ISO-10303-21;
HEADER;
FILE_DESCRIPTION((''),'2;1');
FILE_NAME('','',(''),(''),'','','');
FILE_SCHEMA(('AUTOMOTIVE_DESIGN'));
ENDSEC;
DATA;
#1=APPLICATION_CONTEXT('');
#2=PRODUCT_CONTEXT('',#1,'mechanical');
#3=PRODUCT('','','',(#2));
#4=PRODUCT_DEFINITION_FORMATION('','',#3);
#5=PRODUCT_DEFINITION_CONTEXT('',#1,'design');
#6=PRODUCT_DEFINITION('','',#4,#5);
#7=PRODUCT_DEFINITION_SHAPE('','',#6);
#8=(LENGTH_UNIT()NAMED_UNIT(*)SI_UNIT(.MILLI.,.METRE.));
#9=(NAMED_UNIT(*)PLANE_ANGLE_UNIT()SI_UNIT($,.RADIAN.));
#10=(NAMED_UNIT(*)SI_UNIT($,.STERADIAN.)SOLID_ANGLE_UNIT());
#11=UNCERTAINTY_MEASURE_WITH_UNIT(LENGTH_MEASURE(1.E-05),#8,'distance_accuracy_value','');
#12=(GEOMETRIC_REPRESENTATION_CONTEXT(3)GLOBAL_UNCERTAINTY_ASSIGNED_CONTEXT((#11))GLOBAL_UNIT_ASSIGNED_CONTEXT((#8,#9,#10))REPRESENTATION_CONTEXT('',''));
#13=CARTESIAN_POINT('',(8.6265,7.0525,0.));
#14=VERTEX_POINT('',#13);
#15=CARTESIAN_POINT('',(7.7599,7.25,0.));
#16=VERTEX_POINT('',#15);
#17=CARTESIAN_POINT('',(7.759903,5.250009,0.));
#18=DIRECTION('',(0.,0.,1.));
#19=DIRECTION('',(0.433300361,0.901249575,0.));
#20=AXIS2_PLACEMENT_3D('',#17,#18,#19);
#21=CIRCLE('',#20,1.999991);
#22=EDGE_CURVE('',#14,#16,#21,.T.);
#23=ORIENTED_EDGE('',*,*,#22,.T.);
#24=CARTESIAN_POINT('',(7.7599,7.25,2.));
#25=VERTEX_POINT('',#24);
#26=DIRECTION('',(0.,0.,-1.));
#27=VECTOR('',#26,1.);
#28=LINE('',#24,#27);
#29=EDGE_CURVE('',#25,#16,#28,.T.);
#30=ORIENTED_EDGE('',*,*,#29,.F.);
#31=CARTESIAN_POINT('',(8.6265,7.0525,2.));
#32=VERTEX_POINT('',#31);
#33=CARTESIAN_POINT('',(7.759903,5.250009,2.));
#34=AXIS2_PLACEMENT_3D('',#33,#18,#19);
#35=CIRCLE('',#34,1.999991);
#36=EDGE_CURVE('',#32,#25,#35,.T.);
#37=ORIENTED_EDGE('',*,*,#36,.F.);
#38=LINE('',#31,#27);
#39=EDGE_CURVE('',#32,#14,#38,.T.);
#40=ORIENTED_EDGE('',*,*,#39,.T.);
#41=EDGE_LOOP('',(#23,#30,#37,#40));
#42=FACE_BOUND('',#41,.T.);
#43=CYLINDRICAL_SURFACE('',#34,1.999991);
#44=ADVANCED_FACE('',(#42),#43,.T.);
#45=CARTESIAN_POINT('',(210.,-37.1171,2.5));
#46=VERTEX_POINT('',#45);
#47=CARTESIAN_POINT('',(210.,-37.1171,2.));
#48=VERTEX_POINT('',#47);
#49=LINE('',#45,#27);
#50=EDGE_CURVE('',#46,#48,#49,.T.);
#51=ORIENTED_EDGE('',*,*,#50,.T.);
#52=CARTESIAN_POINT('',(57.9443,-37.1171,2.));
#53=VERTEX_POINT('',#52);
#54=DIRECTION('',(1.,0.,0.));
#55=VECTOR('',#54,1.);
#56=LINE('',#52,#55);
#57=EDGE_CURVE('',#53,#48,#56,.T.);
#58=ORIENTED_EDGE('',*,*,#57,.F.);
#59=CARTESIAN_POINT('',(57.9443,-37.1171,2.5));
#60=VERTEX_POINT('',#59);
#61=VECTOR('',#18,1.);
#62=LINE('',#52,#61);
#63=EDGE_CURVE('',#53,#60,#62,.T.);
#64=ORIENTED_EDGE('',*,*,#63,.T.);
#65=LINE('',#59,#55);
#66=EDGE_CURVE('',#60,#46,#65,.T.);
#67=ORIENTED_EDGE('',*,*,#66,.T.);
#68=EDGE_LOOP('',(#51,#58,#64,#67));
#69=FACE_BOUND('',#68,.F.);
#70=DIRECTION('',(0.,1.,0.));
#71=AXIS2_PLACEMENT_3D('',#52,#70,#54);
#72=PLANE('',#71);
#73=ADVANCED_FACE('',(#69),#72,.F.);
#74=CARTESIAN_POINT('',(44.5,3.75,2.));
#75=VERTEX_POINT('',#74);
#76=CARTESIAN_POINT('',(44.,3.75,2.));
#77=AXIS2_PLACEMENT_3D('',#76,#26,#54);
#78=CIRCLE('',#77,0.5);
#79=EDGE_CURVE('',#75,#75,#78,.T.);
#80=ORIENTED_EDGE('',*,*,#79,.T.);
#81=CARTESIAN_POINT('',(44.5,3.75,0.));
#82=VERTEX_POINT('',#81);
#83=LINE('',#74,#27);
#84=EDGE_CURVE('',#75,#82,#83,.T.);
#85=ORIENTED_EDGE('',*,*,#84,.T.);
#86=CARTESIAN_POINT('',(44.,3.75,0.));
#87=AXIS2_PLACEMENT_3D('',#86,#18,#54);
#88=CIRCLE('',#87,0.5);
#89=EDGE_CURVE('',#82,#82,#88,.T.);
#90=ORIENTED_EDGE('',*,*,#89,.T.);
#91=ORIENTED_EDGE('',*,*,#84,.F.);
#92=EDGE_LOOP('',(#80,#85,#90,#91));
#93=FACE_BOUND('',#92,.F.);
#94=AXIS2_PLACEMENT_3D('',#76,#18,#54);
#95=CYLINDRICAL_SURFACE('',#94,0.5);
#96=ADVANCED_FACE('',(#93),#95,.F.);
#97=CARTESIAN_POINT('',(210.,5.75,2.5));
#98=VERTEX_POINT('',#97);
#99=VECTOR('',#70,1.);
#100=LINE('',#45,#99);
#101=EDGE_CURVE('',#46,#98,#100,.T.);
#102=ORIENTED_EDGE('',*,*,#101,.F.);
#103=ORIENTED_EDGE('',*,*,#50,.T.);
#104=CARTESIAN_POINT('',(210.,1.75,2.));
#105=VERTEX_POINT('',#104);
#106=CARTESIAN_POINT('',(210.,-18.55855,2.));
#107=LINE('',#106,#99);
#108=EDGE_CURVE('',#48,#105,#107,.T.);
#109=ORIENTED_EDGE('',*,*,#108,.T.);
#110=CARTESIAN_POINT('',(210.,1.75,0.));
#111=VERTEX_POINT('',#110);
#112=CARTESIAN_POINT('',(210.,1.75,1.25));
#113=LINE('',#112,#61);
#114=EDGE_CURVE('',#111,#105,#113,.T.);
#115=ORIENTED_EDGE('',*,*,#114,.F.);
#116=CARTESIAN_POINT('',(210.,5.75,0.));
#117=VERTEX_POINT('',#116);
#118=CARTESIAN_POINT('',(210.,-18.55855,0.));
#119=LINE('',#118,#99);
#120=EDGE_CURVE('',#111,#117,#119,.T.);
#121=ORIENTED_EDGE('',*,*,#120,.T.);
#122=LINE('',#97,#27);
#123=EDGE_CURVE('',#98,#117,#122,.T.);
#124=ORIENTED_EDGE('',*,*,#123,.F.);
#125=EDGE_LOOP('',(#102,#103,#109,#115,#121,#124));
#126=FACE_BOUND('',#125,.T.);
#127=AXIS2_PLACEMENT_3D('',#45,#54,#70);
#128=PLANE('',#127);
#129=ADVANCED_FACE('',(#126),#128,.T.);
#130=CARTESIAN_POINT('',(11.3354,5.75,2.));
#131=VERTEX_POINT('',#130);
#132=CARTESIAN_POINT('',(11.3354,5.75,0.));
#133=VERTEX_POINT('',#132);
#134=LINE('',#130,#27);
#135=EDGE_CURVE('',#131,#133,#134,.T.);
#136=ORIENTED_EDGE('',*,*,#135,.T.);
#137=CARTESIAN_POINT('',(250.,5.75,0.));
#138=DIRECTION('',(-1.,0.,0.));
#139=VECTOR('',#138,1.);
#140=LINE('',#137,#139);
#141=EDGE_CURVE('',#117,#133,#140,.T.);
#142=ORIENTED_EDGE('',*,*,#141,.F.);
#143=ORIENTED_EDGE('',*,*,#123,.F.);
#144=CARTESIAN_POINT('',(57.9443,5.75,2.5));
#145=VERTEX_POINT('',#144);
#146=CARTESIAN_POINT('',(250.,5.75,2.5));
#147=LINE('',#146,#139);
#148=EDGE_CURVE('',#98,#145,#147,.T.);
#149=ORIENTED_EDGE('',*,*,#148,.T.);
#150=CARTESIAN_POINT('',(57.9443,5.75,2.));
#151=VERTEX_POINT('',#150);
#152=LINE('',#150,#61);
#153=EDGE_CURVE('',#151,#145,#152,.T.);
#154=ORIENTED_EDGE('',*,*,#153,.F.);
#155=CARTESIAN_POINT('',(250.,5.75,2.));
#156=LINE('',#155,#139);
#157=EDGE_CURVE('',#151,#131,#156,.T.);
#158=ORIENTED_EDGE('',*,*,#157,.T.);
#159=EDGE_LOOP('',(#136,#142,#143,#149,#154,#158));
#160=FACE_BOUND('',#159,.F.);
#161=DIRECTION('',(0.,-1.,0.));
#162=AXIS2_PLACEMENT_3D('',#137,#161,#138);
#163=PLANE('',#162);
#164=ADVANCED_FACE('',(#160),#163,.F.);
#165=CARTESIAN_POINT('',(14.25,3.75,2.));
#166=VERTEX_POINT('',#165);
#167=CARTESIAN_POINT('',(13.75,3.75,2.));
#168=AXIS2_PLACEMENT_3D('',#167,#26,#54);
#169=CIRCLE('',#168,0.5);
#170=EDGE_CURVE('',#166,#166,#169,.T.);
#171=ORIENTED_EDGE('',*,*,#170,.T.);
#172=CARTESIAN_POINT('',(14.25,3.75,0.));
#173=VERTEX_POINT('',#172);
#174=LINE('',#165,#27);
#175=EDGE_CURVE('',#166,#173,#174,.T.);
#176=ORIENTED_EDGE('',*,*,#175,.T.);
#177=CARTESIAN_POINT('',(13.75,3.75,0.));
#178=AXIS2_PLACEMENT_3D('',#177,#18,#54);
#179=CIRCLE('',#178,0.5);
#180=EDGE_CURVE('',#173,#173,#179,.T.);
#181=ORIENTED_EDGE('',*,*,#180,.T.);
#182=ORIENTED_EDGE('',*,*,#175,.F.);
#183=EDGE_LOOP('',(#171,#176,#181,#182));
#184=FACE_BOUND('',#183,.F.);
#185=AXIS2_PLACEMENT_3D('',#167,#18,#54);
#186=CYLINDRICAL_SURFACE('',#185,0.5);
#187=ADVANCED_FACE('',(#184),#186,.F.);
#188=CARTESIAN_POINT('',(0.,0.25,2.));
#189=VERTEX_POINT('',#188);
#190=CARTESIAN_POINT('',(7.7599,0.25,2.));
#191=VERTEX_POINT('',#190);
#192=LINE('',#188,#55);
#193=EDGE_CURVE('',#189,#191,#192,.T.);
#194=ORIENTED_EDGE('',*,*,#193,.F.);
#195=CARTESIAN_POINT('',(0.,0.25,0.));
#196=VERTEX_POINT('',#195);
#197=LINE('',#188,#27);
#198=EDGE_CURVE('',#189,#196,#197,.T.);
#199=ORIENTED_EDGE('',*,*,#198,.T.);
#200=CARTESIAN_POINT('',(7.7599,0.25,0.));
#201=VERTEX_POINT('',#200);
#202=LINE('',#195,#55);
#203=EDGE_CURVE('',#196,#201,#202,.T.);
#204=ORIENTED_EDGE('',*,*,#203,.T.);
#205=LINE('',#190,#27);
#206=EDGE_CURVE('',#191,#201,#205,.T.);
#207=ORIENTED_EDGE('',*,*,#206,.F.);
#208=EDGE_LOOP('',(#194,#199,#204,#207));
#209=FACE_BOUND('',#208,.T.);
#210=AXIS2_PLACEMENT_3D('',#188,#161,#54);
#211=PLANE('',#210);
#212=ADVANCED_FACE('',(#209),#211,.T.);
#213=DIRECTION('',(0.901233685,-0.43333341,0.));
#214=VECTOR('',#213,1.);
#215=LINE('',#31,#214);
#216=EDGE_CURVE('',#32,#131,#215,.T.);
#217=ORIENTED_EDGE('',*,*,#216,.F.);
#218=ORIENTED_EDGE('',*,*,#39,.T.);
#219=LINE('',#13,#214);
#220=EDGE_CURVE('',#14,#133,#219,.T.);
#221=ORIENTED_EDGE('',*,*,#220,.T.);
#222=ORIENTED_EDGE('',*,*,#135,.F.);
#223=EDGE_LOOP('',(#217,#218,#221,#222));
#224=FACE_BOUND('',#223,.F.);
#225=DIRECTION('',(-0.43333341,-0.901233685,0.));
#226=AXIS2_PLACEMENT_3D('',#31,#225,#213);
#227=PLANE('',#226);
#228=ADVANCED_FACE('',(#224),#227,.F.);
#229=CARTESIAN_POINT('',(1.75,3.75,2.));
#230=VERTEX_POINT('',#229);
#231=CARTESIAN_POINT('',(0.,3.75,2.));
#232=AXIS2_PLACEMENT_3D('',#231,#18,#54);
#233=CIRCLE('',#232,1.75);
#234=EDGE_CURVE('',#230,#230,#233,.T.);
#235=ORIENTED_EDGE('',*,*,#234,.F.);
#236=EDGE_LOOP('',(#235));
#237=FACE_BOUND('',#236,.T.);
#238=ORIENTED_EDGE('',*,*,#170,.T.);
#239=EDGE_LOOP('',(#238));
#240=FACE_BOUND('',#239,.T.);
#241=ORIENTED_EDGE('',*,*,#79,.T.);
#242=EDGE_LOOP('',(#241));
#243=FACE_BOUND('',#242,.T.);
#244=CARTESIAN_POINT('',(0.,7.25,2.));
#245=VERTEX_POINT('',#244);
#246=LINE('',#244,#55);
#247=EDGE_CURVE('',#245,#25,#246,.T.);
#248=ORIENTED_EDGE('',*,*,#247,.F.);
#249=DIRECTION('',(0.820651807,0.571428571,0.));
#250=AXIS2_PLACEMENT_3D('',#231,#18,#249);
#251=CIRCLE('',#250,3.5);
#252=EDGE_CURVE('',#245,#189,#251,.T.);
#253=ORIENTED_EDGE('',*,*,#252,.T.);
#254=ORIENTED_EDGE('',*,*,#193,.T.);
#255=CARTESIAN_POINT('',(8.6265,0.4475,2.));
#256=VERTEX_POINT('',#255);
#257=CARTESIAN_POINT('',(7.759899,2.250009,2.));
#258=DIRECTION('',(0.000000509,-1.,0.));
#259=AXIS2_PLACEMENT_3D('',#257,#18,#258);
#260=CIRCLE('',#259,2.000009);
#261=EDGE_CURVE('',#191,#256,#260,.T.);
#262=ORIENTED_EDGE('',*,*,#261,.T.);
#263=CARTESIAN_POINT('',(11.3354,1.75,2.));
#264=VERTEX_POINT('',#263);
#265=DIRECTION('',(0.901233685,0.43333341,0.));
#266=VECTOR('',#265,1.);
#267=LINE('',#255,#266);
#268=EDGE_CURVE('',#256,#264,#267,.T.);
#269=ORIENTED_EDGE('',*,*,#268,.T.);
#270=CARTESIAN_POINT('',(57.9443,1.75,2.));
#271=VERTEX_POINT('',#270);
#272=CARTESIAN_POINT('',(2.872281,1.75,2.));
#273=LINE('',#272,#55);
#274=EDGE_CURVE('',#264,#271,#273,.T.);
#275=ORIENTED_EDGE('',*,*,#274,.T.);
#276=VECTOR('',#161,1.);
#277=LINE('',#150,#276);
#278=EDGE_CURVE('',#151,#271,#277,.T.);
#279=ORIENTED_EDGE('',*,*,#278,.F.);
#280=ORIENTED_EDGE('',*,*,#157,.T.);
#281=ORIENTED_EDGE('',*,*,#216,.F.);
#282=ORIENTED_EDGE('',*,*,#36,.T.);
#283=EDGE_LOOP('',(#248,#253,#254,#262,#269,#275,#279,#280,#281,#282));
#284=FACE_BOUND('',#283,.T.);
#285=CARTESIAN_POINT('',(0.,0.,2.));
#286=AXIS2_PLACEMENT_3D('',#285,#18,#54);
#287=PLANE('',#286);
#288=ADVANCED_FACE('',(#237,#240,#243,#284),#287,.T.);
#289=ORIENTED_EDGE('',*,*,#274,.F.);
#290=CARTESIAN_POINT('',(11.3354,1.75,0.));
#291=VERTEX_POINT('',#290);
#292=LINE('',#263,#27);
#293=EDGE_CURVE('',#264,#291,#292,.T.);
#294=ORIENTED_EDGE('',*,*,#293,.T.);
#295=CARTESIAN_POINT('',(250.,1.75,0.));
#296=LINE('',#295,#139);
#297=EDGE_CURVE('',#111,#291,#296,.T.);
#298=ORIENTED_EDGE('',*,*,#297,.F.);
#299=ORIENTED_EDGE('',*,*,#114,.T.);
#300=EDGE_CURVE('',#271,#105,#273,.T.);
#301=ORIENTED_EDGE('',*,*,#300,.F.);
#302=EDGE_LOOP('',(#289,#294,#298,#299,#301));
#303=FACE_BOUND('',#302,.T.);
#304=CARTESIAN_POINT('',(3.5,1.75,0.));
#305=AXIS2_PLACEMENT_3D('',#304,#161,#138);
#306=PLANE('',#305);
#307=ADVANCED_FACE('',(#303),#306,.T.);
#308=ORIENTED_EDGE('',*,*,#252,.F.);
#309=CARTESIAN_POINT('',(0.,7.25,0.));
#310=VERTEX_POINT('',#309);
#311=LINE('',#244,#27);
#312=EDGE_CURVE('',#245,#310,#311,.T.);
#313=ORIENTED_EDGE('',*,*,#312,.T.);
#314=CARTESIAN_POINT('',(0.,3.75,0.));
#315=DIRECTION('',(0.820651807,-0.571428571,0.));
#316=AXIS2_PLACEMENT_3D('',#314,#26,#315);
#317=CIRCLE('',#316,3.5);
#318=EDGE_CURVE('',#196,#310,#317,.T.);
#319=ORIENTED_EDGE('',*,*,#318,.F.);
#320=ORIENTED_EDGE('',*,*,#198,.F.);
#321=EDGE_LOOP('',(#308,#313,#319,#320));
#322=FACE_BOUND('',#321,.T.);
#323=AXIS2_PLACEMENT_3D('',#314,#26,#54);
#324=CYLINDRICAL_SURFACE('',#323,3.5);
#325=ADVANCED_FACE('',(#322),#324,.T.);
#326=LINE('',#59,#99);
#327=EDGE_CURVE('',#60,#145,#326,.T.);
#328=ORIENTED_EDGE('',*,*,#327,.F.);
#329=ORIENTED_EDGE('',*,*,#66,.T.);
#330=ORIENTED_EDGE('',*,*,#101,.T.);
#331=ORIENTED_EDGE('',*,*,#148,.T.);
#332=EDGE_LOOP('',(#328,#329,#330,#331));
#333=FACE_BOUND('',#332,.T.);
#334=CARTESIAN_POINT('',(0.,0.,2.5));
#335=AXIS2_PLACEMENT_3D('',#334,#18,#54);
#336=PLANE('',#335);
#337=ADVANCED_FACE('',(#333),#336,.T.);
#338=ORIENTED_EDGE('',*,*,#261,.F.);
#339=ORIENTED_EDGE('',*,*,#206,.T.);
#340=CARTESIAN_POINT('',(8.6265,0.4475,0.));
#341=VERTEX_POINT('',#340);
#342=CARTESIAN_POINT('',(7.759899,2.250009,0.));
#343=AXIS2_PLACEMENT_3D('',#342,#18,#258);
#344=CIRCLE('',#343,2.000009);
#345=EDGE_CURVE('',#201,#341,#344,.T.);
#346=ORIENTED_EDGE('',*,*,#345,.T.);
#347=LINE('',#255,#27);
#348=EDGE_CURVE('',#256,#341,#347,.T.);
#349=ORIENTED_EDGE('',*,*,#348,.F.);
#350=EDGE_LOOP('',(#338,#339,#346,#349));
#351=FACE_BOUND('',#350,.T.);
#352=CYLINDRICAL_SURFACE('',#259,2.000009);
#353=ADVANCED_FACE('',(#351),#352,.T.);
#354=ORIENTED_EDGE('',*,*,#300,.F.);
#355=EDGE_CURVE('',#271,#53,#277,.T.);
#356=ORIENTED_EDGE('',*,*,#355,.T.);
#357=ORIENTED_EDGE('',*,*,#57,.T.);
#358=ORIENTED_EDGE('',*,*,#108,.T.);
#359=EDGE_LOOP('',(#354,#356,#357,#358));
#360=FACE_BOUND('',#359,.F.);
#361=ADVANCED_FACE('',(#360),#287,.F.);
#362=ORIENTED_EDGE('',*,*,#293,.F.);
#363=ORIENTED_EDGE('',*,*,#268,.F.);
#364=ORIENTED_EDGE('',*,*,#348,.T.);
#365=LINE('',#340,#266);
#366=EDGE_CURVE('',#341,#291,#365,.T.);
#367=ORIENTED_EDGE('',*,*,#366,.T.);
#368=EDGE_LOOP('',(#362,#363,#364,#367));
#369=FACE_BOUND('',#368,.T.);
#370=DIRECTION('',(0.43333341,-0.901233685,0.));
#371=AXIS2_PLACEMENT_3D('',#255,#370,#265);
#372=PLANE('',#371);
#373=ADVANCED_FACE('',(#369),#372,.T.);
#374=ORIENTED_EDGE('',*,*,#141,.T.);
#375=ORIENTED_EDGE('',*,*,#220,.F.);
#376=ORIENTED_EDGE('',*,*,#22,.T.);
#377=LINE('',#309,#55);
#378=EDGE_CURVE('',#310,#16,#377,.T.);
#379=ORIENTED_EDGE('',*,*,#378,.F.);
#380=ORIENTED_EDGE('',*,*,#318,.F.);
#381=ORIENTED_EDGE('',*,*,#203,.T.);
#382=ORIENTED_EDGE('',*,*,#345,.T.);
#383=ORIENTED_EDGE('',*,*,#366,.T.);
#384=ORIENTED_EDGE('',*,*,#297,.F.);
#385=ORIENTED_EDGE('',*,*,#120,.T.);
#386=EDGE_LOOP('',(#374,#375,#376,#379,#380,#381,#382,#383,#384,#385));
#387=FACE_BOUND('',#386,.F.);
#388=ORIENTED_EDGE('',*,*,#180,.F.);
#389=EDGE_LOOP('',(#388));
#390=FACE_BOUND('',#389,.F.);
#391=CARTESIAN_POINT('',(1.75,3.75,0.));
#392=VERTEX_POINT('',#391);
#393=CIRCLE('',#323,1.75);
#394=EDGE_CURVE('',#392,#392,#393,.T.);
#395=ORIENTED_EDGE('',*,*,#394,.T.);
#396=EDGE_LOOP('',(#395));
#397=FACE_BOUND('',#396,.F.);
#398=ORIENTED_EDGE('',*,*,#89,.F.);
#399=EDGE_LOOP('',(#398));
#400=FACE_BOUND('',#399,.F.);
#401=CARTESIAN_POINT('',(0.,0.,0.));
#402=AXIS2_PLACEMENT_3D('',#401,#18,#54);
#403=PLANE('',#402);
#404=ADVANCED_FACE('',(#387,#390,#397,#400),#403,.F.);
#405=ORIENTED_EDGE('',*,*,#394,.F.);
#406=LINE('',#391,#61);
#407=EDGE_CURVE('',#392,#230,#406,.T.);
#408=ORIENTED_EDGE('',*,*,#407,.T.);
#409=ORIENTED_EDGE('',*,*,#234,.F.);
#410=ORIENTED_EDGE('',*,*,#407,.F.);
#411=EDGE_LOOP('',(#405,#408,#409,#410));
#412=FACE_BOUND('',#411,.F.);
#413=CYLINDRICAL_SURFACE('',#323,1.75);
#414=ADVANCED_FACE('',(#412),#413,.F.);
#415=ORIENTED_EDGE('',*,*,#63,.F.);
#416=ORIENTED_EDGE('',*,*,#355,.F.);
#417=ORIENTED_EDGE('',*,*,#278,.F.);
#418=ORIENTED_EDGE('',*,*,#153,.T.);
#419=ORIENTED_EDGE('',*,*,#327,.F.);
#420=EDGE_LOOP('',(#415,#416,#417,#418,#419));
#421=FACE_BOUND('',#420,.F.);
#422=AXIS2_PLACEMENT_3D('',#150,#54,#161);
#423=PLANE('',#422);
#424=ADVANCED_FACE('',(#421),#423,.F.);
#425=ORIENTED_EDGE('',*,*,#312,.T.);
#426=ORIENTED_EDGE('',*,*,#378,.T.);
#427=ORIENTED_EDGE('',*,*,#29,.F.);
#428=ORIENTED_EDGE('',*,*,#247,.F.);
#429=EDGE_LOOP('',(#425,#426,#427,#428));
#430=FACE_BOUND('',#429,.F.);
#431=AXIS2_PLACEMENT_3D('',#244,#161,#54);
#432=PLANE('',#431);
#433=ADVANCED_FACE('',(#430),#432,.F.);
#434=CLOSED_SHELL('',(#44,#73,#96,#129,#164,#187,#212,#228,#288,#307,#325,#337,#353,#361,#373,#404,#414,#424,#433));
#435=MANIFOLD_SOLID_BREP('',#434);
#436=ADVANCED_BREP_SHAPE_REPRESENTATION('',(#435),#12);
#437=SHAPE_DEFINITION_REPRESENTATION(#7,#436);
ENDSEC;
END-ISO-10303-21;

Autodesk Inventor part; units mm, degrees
ref_plane "YZ Plane" through (0, 0, 0) normal (1, 0, 0) x (0, 1, 0)
ref_plane "XZ Plane" through (0, 0, 0) normal (0, 1, 0) x (-1, 0, 0)
ref_plane "XY Plane" through (0, 0, 0) normal (0, 0, 1) x (1, 0, 0)
sketch "Sketch1" plane through (0, 0, 0) normal (0, 0, 1) x (1, 0, 0)
  circle A0 centre (0, 3.75) radius 1.75 projected
  line L0 (3.5, -3.25) -> (11.1738, -3.25) projected
  line L1 (11.1738, -3.25) -> (11.1738, -5.25) projected
  line L2 (11.1738, -5.25) -> (-11.1738, -5.25) projected
  line L3 (-11.1738, -5.25) -> (-11.1738, -3.25) projected
  line L4 (-11.1738, -3.25) -> (-3.5, -3.25) projected
  line L5 (-3.5, -3.25) -> (-3.5, 3.75) projected
  arc A1 (3.5, 3.75) -> (-3.5, 3.75) centre (0, 3.75) ccw projected
  line L6 (3.5, 3.75) -> (3.5, -3.25) projected
  line L7 (44, 1.75) -> (50, 1.75) projected
  circle A2 centre (0, 3.75) radius 3.5
  line L8 (0, 3.75) -> (250, 3.75)
  line L9 (50, 1.75) -> (0, 1.75)
  line L10 (0, 1.75) -> (0, 3.75)
  line L11 (0, 3.75) -> (50, 3.75)
  line L12 (50, 3.75) -> (50, 1.75)
  line L13 (50, 1.75) -> (250, 1.75)
  line L14 (250, 1.75) -> (250, 3.75)
  line L15 (250, 3.75) -> (50, 3.75)
  line L16 (50, 3.75) -> (50, 1.75)
  line L17 (0, 1.75) -> (250, 1.75)
  line L18 (250, 1.75) -> (250, 5.75)
  line L19 (250, 5.75) -> (0, 5.75)
  line L20 (0, 5.75) -> (0, 1.75)
  circle A3 centre (0, 3.75) radius 3.5
  point P0 (0, 0)
  point P1 (2.8723, 1.75)
  point P2 (2.8723, 5.75)
  dimension "d0" = 250
  dimension "d1" = 2
extrude "Extrusion1" add sketch "Sketch1" along normal blind 2 contours L8 A2 L9 L10 A0 | A0 L20 L19 A1 L8 | A0 L10 L9 A2 A1 L19 L20 | L8 L12 L7 L9 L6 | L6 L9 A2 | A1 L19 L18 L8 | L8 L14 L13 L12
sketch "Sketch2" plane through (0, 0, 2) normal (0, 0, 1) x (1, 0, 0)
  line L0 (13, -15.35) -> (13, -12.35) projected
  line L1 (13, -12.35) -> (14.6, -12.35) projected
  line L2 (14.6, -12.35) -> (14.6, -15.35) projected
  line L3 (14.6, -15.35) -> (13, -15.35) projected
  line L4 (15, -16.35) -> (12.5, -16.35) projected
  line L5 (15, -8.75) -> (15, -16.35) projected
  line L6 (15, -8.75) -> (15, -5.25) projected
  line L7 (12.5, -5.25) -> (15, -5.25) projected
  line L8 (12.5, -16.35) -> (12.5, -5.25) projected
  line L9 (44, -8.25) -> (41.5181, -8.25) projected
  line L10 (44, -9.25) -> (46.5, -9.25) projected
  line L11 (13.75, -5.25) -> (13.75, 7.3756)
  line L12 (44, -8.25) -> (44, 8.5683)
  line L13 (2.8723, 1.75) -> (250, 1.75) projected
  line L14 (250, 1.75) -> (250, 5.75) projected
  line L15 (250, 5.75) -> (2.8723, 5.75) projected
  arc A0 (2.8723, 5.75) -> (2.8723, 1.75) centre (0, 3.75) ccw projected
  circle A1 centre (0, 3.75) radius 1.75 projected
  line L16 (250, 5.75) -> (2.8723, 5.75) projected
  line L17 (13.75, 5.75) -> (13.75, 1.75)
  circle A2 centre (13.75, 3.75) radius 0.5
  line L18 (44, 5.75) -> (44, 1.75)
  line L19 (2.8723, 1.75) -> (250, 1.75) projected
  circle A3 centre (44, 3.75) radius 0.5
  point P0 (0, 0)
  dimension "d4" = 1
  dimension "d5" = 1
extrude "Extrusion2" cut sketch "Sketch2" against normal blind 2 contours A2 L11 | L11 A2 | A3 L12 | L12 A3
sketch "Sketch3" plane through (0, 0, 2) normal (0, 0, 1) x (1, 0, 0)
  line L0 (50, -24.1664) -> (50, 13.5237) projected
  circle A0 centre (44, 3.75) radius 0.5 projected
  circle A1 centre (13.75, 3.75) radius 0.5 projected
  line L1 (2.8723, 1.75) -> (250, 1.75) projected
  line L2 (250, 1.75) -> (250, 5.75) projected
  line L3 (250, 5.75) -> (2.8723, 5.75) projected
  arc A2 (2.8723, 5.75) -> (2.8723, 1.75) centre (0, 3.75) ccw projected
  circle A3 centre (0, 3.75) radius 1.75 projected
  line L4 (-50, -43.45) -> (50, -43.45) projected
  line L5 (250, 5.75) -> (57.9443, 5.75)
  line L6 (57.9443, 5.75) -> (57.9443, -37.1171)
  line L7 (57.9443, -37.1171) -> (250, -37.1171)
  line L8 (250, -37.1171) -> (250, 5.75)
  point P0 (0, 0)
  point P1 (57.9443, 5.75)
extrude "Extrusion3" add sketch "Sketch3" along normal blind 0.5 contours L6 L3 L2 L1 | L1 L8 L7 L6
sketch "Sketch4" plane through (0, 0, 2.5) normal (0, 0, 1) x (1, 0, 0)
  line L0 (250, -37.1171) -> (250, 5.75) projected
  line L1 (250, 5.75) -> (57.9443, 5.75) projected
  line L2 (57.9443, 5.75) -> (57.9443, -37.1171) projected
  line L3 (57.9443, -37.1171) -> (250, -37.1171) projected
  line L4 (250, -37.1171) -> (250, 1.75) projected
  line L5 (250, -37.1171) -> (210, -37.1171)
  line L6 (210, -37.1171) -> (210, 5.75)
  line L7 (210, 5.75) -> (250, 5.75)
  line L8 (250, 5.75) -> (250, -37.1171)
  point P0 (0, 0)
  dimension "d10" = 40
extrude "Extrusion4" cut sketch "Sketch4" against normal through all contours L3 L6 L1 L0
sketch "Sketch5" plane through (0, 0, 2) normal (0, 0, 1) x (1, 0, 0)
  line L0 (57.9443, 1.75) -> (57.9443, 5.75) projected
  line L1 (57.9443, 5.75) -> (2.8723, 5.75) projected
  arc A0 (2.8723, 5.75) -> (2.8723, 1.75) centre (0, 3.75) ccw projected
  line L2 (2.8723, 1.75) -> (57.9443, 1.75) projected
  circle A1 centre (44, 3.75) radius 0.5 projected
  circle A2 centre (13.75, 3.75) radius 0.5 projected
  circle A3 centre (0, 3.75) radius 1.75 projected
  arc A4 (2.8723, 5.75) -> (2.8723, 1.75) centre (0, 3.75) ccw projected
  line L3 (0, 0.25) -> (7.7599, 0.25)
  line L4 (8.6265, 0.4475) -> (11.3354, 1.75)
  line L5 (2.8723, 1.75) -> (57.9443, 1.75) projected
  arc A5 (7.7599, 0.25) -> (8.6265, 0.4475) centre (7.7599, 2.25) ccw
  line L6 (0, 3.75) -> (10.3738, 3.75)
  line L7 (0, 7.25) -> (7.7599, 7.25)
  line L8 (8.6265, 7.0525) -> (11.3354, 5.75)
  arc A6 (8.6265, 7.0525) -> (7.7599, 7.25) centre (7.7599, 5.25) ccw
  point P0 (0, 0)
  dimension "d13" = 2
extrude "Extrusion5" add sketch "Sketch5" against normal up to surface (2 mm away) contours L4 A5 L3 A0 L2 | L1 A0 L7 A6 L8
properties part number "wachlarz_1"
